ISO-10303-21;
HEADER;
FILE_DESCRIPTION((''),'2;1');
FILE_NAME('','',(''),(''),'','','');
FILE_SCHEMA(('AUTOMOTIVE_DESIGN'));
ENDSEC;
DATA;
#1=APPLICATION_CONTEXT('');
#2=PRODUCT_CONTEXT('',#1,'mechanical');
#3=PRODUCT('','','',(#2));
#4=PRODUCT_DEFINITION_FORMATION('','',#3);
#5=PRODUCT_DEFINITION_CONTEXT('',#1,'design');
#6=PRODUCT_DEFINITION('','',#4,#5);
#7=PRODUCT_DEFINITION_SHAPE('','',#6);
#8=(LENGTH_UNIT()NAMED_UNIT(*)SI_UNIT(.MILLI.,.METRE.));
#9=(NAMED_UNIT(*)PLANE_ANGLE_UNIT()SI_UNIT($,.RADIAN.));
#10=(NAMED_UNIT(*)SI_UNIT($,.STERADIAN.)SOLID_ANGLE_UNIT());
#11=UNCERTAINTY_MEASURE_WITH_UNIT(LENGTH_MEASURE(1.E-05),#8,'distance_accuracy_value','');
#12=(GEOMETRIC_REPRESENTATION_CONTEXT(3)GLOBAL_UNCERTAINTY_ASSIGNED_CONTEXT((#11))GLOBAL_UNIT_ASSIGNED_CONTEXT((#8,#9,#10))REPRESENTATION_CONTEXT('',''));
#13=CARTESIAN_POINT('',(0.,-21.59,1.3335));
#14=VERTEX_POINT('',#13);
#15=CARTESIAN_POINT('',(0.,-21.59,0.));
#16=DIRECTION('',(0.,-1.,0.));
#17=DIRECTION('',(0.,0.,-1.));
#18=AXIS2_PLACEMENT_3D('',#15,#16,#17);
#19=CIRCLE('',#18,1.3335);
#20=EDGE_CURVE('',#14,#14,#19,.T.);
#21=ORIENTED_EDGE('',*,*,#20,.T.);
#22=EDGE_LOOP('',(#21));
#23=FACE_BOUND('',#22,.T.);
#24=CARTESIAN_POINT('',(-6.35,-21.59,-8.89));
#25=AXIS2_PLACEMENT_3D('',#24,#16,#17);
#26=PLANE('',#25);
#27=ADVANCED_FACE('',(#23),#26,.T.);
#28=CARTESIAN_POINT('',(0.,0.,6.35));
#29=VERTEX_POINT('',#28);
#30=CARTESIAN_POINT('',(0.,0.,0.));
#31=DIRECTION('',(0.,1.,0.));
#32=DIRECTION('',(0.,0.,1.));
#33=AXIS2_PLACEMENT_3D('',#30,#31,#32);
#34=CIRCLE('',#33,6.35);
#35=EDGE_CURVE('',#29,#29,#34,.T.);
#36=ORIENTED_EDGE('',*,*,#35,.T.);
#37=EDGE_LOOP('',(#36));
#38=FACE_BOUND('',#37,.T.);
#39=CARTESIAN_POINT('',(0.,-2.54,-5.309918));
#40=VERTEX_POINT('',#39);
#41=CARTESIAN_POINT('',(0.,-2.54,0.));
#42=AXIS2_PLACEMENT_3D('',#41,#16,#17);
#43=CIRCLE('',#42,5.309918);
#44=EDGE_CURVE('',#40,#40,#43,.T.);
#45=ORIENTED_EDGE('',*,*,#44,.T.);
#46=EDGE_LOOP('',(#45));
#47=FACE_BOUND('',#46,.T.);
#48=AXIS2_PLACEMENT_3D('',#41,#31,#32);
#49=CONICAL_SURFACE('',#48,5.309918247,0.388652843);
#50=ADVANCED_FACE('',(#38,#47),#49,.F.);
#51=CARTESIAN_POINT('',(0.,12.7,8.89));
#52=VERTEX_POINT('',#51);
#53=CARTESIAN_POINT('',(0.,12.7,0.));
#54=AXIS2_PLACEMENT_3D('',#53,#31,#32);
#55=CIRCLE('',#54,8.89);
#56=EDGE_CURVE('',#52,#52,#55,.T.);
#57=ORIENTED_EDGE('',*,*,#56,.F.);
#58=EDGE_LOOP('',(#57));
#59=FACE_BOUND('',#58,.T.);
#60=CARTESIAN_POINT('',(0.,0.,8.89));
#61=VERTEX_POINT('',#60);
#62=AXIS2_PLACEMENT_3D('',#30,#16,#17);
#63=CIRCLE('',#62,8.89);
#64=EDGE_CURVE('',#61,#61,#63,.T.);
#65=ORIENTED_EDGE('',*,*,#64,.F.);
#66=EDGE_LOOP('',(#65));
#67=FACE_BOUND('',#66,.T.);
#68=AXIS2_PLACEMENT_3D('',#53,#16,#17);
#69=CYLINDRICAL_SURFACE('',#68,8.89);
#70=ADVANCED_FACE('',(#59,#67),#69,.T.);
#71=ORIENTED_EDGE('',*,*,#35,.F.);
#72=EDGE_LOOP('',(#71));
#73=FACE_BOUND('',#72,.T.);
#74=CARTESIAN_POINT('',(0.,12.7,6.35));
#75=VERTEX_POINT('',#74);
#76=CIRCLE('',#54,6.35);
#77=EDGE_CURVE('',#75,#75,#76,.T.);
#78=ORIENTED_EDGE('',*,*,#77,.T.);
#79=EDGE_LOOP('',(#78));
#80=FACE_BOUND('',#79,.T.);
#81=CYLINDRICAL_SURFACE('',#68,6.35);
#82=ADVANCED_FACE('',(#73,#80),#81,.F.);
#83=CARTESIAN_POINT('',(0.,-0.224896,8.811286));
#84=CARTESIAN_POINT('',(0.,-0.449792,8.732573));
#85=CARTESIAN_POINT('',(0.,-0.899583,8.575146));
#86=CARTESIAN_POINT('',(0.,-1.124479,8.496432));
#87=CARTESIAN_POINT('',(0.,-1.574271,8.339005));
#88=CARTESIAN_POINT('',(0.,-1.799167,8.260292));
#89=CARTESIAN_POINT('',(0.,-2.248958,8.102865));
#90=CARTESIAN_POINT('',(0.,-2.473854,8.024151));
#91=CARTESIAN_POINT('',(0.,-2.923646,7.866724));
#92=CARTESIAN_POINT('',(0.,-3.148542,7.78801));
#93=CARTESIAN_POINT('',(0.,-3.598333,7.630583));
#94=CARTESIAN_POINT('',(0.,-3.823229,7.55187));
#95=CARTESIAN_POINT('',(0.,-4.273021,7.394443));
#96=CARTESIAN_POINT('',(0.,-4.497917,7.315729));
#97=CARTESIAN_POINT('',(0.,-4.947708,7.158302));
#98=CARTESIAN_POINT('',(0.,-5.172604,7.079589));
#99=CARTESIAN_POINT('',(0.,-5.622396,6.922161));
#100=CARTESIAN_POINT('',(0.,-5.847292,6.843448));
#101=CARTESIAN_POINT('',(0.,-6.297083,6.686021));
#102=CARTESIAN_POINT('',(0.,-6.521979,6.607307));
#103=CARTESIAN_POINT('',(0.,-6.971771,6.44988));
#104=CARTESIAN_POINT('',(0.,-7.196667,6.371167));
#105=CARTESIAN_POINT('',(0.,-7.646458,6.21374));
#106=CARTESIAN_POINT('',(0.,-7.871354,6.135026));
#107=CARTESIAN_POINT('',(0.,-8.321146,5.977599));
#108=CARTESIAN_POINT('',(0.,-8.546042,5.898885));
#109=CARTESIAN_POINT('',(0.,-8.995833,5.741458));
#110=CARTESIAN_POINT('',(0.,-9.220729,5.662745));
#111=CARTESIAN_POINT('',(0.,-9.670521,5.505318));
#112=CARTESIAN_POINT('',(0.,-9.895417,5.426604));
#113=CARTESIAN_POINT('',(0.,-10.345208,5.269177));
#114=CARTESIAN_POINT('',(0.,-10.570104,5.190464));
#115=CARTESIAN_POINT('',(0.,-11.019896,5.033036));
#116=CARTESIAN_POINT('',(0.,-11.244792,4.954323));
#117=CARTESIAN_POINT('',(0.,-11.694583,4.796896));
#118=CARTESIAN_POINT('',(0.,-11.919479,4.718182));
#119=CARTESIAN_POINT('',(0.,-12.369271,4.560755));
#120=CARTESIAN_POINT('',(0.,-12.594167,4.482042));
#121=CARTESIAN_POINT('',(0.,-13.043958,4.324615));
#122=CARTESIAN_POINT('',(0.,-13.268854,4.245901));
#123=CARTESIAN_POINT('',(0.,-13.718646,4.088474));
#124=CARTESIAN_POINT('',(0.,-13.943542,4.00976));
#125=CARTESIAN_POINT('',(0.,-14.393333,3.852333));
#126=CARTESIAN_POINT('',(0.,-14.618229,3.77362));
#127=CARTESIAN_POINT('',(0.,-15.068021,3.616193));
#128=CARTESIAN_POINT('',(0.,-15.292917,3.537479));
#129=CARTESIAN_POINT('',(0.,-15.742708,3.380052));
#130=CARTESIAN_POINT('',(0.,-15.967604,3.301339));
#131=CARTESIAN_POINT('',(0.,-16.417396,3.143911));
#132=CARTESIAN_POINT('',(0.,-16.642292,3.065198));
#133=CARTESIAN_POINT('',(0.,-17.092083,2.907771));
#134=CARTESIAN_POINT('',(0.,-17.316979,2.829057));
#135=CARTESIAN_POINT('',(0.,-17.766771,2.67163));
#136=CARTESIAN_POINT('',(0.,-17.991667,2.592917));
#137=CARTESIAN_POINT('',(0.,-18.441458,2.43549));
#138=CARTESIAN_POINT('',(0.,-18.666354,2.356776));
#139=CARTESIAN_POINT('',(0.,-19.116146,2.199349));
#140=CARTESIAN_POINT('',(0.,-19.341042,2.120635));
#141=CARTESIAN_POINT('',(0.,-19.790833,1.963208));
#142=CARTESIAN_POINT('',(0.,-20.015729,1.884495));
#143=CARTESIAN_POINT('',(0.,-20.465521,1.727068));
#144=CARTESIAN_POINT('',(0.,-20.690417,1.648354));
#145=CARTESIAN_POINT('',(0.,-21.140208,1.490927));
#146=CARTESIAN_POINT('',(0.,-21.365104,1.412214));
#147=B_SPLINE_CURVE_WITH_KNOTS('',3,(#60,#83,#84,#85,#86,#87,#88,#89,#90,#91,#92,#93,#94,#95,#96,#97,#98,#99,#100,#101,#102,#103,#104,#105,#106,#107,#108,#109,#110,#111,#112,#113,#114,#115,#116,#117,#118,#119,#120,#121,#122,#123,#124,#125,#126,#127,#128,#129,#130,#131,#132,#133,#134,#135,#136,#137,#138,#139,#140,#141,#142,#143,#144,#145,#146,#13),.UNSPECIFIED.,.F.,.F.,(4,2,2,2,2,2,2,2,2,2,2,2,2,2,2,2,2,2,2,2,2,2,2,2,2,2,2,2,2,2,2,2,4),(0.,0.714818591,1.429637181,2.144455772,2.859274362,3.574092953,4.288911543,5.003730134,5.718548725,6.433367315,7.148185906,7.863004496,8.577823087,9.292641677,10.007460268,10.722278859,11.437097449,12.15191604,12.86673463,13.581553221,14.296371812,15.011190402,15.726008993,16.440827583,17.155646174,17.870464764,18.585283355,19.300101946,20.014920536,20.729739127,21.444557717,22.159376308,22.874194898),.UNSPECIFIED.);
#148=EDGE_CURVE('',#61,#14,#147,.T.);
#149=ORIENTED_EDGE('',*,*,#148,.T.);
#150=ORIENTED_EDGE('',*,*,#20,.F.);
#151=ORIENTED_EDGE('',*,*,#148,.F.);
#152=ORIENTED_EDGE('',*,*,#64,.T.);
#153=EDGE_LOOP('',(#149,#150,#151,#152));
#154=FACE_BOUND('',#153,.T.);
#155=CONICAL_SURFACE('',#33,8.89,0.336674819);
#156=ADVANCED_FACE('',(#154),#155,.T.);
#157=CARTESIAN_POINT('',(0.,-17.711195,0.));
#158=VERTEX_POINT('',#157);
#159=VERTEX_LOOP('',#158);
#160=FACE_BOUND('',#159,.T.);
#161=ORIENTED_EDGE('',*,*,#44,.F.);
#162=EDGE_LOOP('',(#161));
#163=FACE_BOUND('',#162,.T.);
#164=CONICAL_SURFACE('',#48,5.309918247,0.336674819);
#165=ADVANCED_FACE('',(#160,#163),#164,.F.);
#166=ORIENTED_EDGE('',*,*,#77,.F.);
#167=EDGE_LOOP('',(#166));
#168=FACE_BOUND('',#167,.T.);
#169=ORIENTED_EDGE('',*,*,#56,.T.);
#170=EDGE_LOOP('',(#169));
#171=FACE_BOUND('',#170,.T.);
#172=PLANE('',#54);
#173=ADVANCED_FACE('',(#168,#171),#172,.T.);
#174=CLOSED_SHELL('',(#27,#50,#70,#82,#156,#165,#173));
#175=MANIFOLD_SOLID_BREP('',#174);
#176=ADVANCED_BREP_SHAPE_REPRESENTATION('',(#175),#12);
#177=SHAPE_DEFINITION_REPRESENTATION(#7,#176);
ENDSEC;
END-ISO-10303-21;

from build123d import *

# Parameters (mm, degrees)
SKETCH1_R               = 8.89
SKETCH1_R_2             = 6.35
BOSS_EXTRUDE1_DEPTH     = 12.7
CUT_EXTRUDE1_DEPTH      = 29.341210278
CUT_EXTRUDE1_DEPTH_BACK = 29.341210278
SKETCH4_W               = 12.7
SKETCH4_H               = 5.08


# Read off the part's stored shape, not the designer's step: Revolve6
with BuildPart() as part:
    # Sketch1 → Boss-Extrude1 (new body)
    with BuildSketch(Plane(origin=(0, 0, 0), x_dir=(1, 0, 0), z_dir=(0, 1, 0))):
        with Locations(Location((0, 0, 0), (0, 0, 270))):
            Circle(SKETCH1_R)
        with Locations(Location((0, 0, 0), (0, 0, 270))):
            Circle(SKETCH1_R_2, mode=Mode.SUBTRACT)
    extrude(amount=BOSS_EXTRUDE1_DEPTH)

    # Revolve6 outline → Revolve6 (revolve)
    with BuildSketch(Plane.XY):
        Polygon((6.35, 0), (5.309918247, -2.54), (0, -17.711194992), (0, -25.4), (8.89, 0), align=None)
    revolve(axis=Axis((0, 0, 0), (0, 1, 0)))

    # Sketch4 → Cut-Extrude1 (cut, two sides: drawn at the far end of the back side and taken through both)
    with BuildSketch(Plane.XY.offset(-CUT_EXTRUDE1_DEPTH_BACK)):
        with Locations((0, -24.13)):
            Rectangle(SKETCH4_W, SKETCH4_H)
    extrude(amount=CUT_EXTRUDE1_DEPTH + CUT_EXTRUDE1_DEPTH_BACK, mode=Mode.SUBTRACT)


solid = part.part
